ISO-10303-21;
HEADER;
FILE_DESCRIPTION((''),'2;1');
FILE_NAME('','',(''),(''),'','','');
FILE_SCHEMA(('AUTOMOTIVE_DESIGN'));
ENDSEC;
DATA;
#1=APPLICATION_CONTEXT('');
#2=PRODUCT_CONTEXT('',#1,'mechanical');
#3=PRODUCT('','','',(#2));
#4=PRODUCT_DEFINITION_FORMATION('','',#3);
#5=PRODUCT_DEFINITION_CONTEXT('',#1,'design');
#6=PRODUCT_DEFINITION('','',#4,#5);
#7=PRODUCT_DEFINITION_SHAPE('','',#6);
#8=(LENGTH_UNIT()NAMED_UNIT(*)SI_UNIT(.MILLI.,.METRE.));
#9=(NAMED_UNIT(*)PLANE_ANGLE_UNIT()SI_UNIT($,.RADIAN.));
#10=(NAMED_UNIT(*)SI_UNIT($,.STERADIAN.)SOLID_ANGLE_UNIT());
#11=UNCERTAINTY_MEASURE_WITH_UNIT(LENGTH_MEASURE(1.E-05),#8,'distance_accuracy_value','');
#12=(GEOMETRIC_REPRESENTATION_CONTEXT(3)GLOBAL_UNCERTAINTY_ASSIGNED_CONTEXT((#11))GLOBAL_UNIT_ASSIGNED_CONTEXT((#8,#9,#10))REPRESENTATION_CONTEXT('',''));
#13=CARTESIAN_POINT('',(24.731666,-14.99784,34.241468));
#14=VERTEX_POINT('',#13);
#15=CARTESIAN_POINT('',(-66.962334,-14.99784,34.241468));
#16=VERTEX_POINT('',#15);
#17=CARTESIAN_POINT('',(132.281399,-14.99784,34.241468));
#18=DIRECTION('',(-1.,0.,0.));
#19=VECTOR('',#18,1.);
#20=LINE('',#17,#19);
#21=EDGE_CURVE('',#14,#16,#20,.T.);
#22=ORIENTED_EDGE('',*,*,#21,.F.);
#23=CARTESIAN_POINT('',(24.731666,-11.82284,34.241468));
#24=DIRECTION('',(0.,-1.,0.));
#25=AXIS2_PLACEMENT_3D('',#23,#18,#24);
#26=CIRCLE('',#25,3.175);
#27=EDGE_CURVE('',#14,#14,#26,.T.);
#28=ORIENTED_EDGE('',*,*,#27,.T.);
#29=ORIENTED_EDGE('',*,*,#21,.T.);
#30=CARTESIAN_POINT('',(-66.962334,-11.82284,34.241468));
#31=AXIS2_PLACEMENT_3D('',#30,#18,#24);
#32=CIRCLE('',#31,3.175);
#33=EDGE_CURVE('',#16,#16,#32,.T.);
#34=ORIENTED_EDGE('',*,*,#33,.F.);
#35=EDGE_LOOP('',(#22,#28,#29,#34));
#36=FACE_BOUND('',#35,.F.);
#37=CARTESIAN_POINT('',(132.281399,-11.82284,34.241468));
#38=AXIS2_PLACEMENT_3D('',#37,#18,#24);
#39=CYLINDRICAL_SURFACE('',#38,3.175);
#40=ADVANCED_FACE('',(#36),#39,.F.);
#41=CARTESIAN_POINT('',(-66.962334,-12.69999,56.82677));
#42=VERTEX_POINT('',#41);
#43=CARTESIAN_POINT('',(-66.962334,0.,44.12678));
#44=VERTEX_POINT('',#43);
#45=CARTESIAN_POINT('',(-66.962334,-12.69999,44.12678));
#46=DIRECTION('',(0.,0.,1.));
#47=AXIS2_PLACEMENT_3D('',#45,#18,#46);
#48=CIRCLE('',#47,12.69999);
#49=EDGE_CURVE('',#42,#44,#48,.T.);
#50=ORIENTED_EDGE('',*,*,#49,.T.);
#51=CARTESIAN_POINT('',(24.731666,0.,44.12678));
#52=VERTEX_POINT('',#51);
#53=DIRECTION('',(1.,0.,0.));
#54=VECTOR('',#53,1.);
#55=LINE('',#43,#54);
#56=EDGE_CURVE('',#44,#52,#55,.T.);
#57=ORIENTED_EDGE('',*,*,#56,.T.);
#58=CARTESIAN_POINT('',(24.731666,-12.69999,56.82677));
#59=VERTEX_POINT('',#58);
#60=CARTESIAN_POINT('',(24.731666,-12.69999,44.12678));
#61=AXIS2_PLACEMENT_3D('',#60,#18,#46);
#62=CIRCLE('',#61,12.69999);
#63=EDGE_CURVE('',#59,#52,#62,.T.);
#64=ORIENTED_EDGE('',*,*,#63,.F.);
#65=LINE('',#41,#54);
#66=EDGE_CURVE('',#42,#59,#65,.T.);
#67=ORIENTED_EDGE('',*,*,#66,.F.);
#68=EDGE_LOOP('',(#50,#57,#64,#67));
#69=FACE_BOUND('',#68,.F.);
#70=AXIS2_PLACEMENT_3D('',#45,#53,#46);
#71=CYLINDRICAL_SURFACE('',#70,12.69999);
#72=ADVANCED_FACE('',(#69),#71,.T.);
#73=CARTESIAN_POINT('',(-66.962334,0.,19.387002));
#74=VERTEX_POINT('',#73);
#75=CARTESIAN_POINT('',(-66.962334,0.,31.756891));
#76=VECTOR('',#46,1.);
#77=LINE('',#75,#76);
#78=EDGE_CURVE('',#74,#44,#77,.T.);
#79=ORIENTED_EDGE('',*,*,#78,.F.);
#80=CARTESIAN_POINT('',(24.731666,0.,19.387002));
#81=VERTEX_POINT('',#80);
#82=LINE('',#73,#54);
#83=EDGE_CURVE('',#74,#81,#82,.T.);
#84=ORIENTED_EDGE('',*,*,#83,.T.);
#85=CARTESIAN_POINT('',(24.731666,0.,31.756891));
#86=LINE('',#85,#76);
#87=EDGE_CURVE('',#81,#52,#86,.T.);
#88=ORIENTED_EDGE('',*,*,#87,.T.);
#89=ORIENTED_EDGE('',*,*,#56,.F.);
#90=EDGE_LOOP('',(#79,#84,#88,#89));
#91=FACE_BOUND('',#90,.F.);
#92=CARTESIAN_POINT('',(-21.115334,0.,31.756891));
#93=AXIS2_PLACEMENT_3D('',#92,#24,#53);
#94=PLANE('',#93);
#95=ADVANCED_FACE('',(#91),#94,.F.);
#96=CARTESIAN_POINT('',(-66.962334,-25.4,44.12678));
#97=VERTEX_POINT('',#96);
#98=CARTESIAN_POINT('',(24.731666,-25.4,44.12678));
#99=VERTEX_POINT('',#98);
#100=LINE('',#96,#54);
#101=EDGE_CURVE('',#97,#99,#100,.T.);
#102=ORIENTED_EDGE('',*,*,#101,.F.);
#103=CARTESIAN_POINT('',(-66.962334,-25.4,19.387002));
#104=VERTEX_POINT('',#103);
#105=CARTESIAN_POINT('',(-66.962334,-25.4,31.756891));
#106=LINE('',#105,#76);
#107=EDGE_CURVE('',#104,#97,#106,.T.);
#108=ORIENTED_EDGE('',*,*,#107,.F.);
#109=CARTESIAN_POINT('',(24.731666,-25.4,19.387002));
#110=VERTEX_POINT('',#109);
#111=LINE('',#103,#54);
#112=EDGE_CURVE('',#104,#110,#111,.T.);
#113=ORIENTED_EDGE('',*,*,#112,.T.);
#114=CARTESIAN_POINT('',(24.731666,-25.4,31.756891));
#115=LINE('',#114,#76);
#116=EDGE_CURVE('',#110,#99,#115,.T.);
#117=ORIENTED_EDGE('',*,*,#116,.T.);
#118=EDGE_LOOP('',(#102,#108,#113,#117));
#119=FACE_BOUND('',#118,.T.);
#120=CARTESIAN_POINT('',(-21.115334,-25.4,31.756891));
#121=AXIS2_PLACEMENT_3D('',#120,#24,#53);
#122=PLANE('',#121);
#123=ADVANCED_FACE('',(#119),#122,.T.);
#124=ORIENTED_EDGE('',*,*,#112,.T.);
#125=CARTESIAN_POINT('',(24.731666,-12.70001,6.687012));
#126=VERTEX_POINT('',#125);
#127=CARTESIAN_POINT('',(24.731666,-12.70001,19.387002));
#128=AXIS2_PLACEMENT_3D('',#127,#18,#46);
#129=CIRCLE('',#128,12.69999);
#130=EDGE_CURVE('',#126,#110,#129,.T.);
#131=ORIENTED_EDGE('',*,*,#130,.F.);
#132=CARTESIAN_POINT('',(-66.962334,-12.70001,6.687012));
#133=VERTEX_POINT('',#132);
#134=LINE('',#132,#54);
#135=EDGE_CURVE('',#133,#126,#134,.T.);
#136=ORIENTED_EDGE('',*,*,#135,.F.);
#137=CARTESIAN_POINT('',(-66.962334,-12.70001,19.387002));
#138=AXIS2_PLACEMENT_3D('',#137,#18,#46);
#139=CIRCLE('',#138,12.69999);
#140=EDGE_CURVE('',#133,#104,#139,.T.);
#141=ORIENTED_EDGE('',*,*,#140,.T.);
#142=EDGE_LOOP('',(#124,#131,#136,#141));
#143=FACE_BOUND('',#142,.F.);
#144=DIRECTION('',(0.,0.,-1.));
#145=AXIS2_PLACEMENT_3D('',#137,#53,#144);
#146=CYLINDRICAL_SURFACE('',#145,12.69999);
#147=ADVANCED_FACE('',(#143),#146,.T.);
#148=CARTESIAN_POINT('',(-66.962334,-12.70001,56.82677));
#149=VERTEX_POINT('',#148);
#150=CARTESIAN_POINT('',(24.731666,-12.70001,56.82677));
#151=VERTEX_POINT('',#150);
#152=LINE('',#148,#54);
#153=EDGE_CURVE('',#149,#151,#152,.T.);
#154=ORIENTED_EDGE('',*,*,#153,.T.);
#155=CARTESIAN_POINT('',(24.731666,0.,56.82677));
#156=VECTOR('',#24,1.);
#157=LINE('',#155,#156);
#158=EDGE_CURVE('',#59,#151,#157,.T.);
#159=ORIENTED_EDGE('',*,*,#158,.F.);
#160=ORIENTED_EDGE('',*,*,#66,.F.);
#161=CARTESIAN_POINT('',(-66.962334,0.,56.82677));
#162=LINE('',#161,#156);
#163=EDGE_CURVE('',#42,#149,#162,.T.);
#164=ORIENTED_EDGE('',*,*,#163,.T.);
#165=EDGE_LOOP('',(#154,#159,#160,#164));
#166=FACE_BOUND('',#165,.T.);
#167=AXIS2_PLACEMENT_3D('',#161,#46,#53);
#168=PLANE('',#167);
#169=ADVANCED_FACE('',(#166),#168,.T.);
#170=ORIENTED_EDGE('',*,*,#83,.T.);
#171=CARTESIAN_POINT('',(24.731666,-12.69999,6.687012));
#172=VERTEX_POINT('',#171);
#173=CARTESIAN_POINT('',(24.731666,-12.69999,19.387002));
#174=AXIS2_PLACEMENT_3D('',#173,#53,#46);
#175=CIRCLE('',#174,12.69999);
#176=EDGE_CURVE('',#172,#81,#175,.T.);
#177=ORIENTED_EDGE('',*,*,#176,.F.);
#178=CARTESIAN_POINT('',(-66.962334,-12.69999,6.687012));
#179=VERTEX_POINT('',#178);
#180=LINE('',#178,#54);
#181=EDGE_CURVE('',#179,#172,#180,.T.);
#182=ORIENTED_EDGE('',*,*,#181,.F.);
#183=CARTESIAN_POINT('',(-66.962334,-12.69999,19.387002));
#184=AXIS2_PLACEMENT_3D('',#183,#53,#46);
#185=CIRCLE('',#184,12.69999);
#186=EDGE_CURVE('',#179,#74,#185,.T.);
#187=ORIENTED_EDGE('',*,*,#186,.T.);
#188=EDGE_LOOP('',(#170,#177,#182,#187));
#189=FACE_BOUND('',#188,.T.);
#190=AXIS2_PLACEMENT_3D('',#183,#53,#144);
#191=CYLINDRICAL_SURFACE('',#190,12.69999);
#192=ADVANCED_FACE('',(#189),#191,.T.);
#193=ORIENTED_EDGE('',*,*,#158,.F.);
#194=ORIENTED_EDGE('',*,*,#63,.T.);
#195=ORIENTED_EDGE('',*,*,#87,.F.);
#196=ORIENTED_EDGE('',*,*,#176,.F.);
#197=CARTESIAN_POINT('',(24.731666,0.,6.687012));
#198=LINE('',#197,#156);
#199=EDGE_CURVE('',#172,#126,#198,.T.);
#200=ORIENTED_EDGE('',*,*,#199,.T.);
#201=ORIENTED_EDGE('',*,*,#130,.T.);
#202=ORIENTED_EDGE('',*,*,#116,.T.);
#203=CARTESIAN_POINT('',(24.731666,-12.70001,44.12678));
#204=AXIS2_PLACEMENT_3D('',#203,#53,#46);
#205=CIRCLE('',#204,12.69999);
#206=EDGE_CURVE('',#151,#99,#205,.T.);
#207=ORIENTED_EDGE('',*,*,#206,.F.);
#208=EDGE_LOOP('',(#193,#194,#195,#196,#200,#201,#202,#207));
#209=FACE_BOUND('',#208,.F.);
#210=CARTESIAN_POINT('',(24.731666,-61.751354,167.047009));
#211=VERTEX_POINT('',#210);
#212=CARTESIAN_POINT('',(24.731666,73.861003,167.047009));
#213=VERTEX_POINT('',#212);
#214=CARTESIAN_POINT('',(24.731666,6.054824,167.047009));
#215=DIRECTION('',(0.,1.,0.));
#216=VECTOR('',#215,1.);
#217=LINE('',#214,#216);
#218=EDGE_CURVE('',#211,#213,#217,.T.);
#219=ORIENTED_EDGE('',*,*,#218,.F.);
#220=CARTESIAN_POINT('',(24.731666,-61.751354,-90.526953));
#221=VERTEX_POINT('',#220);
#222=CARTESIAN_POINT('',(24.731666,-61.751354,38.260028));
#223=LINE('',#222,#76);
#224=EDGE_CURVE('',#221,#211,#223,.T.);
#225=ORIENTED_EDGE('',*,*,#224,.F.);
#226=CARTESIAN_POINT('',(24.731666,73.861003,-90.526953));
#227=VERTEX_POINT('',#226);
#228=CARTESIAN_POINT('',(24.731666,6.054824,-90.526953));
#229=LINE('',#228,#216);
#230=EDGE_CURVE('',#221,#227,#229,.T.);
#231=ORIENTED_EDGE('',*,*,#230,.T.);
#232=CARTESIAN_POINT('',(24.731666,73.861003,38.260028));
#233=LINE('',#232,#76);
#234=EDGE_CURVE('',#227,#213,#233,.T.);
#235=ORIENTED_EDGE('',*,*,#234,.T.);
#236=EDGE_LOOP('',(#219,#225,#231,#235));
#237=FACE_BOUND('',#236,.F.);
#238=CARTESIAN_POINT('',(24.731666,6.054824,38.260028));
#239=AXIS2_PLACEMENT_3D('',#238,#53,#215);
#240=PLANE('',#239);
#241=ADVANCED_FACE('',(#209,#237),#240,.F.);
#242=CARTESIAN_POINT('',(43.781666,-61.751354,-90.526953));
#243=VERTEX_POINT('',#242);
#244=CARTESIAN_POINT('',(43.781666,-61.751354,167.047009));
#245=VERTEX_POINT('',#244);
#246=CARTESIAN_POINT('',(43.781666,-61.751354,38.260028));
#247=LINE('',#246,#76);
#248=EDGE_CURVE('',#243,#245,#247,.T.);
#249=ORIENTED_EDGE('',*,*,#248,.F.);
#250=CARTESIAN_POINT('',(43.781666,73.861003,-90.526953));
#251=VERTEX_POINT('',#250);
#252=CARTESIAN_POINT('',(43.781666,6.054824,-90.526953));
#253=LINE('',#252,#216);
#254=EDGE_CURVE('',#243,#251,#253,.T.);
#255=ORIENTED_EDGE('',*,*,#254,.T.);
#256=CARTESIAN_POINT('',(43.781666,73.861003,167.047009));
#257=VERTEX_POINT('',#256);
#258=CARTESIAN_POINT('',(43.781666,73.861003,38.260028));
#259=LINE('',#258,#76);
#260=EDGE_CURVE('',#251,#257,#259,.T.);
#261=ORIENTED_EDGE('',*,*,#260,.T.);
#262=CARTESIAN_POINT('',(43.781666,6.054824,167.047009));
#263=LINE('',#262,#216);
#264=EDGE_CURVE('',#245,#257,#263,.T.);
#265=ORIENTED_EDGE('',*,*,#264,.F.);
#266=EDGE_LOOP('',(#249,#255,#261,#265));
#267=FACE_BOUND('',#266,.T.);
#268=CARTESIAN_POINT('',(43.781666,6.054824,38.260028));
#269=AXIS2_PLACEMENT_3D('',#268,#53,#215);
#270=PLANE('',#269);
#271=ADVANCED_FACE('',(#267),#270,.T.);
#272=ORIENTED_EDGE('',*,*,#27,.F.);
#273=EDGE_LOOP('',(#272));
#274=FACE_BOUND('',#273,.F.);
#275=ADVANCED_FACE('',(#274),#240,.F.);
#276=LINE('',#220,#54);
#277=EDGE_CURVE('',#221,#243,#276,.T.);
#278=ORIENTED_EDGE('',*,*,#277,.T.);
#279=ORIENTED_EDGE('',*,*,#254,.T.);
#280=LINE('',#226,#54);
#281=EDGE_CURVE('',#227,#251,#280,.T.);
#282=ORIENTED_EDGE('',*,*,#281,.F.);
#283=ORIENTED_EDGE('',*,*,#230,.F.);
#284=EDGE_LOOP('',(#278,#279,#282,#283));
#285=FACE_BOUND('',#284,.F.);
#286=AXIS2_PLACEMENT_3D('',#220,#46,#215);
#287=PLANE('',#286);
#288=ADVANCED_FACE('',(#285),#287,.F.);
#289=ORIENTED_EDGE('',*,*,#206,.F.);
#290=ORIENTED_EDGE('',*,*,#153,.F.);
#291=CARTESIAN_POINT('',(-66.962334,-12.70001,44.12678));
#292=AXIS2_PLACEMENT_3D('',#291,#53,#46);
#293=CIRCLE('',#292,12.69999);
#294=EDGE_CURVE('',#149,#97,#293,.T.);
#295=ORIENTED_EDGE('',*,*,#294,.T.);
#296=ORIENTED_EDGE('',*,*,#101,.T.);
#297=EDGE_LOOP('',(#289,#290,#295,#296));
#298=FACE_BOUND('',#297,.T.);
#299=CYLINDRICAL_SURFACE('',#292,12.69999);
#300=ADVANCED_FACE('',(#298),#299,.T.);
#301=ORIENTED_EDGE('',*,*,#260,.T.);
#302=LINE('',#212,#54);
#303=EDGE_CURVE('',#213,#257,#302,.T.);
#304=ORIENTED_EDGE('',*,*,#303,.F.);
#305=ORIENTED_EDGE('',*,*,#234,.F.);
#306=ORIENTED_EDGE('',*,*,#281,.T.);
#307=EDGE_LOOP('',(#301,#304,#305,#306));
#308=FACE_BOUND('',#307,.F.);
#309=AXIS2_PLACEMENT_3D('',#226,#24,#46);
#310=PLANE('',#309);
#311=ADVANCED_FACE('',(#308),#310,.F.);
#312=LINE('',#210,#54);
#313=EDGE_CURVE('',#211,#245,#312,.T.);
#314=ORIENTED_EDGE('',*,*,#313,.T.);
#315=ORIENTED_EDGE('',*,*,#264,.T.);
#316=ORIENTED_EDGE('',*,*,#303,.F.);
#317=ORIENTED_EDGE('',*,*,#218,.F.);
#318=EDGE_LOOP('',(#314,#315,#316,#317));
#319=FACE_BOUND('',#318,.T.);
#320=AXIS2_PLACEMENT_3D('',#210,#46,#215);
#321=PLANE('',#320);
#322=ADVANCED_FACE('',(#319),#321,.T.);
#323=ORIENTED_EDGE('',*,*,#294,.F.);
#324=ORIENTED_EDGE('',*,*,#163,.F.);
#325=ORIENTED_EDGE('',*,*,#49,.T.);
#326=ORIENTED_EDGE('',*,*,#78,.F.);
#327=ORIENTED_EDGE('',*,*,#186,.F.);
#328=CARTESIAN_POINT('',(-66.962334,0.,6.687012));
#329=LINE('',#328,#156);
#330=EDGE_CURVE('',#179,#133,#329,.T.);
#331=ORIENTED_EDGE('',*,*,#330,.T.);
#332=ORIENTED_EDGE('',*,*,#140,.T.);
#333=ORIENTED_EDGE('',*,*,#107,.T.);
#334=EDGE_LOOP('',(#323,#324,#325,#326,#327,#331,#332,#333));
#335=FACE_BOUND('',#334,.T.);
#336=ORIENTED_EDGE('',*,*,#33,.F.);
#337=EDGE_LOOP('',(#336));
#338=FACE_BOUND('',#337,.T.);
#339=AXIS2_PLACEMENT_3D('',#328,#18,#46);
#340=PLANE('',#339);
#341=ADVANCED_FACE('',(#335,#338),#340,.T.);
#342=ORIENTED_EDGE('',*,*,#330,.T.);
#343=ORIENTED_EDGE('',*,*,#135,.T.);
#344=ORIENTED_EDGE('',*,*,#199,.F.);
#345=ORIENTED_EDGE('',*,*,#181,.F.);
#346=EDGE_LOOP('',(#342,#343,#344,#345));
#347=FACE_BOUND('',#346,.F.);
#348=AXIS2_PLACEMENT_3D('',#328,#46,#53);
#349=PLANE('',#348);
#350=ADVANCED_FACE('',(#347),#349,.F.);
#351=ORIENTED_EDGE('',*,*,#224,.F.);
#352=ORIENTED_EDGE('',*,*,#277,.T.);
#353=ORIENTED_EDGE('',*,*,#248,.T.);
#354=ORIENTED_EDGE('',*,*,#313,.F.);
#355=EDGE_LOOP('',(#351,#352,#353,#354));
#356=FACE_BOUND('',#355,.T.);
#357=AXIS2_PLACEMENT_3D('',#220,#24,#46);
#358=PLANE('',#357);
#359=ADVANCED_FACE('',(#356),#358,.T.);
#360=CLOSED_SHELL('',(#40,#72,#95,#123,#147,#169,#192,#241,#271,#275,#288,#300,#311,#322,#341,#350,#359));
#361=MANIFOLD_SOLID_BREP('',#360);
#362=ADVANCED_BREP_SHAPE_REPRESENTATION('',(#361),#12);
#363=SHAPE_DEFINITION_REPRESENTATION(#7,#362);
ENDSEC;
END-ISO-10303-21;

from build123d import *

# Parameters (mm, degrees)
F0_W     = 91.694
F0_H     = 50.1397587359
F1_DEPTH = 25.4
F2_R     = 12.69999
F4_D     = 6.35
F5_W     = 135.6123574078
F5_H     = 257.5739622116
F6_DEPTH = 19.05


# Not quite as in the source:
# - a fillet or chamfer is up to 0.001 mm smaller than in the source, because OpenCascade refuses the exact size


with BuildPart() as f1:
    # F0 (on Front) → F1 (new body)
    with BuildSketch(Plane.XZ):
        with Locations((-21.1153341503, 31.7568909377)):
            Rectangle(F0_W, F0_H)
    extrude(amount=F1_DEPTH)

    # F2 (radius 12.7 in the source; OpenCascade refuses exactly that, so slightly less here)
    f2_edges = [f1.edges().sort_by_distance(p)[0] for p in [
        (-21.115334, -25.4, 56.82677),
        (-21.115334, -25.4, 6.687012),
        (-21.115334, 0, 56.82677),
        (-21.115334, 0, 6.687012),
    ]]
    fillet(f2_edges, radius=F2_R)

    # F4 (through all)
    with Locations(Plane.YZ.offset(24.7316658497)):
        with Locations((-11.8228401989, 34.2414677143)):
            Hole(F4_D / 2)

    # F5 (on face) → F6 (join)
    with BuildSketch(Plane.YZ.offset(24.7316658497)):
        with Locations((6.0548242182, 38.2600277662)):
            Rectangle(F5_W, F5_H)
    extrude(amount=F6_DEPTH)


solid = f1.part
